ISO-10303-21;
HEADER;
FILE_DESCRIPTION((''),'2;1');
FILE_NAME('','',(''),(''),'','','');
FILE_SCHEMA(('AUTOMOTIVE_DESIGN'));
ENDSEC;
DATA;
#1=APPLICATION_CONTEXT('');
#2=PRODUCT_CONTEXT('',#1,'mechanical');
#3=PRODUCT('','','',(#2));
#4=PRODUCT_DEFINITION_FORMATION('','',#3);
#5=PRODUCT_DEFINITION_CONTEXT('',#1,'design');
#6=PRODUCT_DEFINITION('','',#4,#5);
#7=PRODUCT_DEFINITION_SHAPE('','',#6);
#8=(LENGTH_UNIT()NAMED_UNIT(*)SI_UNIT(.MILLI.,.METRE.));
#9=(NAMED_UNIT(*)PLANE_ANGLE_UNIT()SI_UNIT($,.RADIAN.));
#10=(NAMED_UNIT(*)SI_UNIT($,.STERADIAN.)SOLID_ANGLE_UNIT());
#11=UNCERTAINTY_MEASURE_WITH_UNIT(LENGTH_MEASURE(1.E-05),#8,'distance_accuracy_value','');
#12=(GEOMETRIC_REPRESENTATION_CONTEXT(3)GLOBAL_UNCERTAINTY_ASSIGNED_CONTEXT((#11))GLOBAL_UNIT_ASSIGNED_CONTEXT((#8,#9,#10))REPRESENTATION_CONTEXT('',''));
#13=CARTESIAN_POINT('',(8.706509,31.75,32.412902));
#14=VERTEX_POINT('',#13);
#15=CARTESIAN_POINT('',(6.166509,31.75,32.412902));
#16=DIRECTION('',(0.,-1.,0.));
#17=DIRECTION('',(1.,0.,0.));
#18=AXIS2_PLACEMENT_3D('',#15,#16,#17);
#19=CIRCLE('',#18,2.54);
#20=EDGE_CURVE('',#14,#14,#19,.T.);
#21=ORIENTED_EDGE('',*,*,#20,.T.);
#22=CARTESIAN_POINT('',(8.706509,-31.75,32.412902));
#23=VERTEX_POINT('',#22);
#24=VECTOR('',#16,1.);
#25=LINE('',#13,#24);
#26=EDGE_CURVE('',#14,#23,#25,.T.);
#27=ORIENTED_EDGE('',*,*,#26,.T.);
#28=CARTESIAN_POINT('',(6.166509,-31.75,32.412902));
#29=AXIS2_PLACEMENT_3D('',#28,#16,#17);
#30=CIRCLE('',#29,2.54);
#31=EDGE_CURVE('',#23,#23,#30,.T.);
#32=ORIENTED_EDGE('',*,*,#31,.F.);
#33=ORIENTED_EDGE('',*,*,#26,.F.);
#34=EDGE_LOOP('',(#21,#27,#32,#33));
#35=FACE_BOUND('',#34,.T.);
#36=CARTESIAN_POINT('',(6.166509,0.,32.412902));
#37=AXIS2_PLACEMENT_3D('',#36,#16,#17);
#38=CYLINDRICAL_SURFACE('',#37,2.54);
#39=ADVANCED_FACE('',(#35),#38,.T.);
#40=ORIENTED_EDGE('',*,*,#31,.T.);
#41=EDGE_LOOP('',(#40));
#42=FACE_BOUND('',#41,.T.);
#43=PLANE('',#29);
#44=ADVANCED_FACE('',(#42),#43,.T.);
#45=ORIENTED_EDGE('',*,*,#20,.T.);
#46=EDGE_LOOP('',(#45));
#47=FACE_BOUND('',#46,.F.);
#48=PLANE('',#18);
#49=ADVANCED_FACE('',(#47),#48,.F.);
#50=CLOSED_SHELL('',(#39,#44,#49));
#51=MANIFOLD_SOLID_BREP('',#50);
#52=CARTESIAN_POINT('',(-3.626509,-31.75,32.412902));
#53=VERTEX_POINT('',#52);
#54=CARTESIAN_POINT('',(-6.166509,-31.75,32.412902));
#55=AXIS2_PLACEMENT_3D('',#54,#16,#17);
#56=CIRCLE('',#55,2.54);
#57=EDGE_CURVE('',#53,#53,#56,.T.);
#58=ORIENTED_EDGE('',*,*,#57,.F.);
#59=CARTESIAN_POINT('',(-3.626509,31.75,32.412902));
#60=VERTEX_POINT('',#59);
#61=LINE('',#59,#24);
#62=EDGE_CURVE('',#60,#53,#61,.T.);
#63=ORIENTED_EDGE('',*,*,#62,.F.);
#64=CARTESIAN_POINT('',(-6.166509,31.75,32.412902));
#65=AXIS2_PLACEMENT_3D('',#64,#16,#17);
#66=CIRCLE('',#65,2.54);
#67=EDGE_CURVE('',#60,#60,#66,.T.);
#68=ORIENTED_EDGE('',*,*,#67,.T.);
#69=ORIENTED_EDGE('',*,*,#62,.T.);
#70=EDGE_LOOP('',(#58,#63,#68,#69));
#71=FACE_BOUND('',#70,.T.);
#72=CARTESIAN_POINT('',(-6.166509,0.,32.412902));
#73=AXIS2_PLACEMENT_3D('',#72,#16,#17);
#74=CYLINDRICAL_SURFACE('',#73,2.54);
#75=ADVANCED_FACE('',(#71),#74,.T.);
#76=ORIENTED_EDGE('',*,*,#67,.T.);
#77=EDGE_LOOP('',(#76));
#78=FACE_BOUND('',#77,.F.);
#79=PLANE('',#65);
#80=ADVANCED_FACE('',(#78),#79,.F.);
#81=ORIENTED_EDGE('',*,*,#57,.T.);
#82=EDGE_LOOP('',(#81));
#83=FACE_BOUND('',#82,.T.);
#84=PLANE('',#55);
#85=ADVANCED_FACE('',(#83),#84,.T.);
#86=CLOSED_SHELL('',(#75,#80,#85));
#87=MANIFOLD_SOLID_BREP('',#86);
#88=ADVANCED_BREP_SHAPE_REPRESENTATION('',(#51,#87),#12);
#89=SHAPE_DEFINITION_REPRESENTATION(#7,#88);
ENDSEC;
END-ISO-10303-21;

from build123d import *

# Parameters (mm, degrees)
F3_R     = 2.54
F4_DEPTH = 31.75


# Not quite as in the source:
# - the program builds the solid bodies; features that only make, move or delete a surface that nothing else refers to are left out


with BuildPart() as f4:
    # F3 (on Front) → F4 (new body, symmetric)
    with BuildSketch(Plane.XZ):
        with Locations((6.1665093526, 32.4129015207)):
            Circle(F3_R)
    extrude(amount=F4_DEPTH, both=True)


with BuildPart() as f4b:
    # F3 (on Front) → F4, piece 2 (new body, symmetric)
    with BuildSketch(Plane.XZ):
        with Locations((-6.1665093526, 32.4129015207)):
            Circle(F3_R)
    extrude(amount=F4_DEPTH, both=True)


solid = Compound([f4.part, f4b.part])
